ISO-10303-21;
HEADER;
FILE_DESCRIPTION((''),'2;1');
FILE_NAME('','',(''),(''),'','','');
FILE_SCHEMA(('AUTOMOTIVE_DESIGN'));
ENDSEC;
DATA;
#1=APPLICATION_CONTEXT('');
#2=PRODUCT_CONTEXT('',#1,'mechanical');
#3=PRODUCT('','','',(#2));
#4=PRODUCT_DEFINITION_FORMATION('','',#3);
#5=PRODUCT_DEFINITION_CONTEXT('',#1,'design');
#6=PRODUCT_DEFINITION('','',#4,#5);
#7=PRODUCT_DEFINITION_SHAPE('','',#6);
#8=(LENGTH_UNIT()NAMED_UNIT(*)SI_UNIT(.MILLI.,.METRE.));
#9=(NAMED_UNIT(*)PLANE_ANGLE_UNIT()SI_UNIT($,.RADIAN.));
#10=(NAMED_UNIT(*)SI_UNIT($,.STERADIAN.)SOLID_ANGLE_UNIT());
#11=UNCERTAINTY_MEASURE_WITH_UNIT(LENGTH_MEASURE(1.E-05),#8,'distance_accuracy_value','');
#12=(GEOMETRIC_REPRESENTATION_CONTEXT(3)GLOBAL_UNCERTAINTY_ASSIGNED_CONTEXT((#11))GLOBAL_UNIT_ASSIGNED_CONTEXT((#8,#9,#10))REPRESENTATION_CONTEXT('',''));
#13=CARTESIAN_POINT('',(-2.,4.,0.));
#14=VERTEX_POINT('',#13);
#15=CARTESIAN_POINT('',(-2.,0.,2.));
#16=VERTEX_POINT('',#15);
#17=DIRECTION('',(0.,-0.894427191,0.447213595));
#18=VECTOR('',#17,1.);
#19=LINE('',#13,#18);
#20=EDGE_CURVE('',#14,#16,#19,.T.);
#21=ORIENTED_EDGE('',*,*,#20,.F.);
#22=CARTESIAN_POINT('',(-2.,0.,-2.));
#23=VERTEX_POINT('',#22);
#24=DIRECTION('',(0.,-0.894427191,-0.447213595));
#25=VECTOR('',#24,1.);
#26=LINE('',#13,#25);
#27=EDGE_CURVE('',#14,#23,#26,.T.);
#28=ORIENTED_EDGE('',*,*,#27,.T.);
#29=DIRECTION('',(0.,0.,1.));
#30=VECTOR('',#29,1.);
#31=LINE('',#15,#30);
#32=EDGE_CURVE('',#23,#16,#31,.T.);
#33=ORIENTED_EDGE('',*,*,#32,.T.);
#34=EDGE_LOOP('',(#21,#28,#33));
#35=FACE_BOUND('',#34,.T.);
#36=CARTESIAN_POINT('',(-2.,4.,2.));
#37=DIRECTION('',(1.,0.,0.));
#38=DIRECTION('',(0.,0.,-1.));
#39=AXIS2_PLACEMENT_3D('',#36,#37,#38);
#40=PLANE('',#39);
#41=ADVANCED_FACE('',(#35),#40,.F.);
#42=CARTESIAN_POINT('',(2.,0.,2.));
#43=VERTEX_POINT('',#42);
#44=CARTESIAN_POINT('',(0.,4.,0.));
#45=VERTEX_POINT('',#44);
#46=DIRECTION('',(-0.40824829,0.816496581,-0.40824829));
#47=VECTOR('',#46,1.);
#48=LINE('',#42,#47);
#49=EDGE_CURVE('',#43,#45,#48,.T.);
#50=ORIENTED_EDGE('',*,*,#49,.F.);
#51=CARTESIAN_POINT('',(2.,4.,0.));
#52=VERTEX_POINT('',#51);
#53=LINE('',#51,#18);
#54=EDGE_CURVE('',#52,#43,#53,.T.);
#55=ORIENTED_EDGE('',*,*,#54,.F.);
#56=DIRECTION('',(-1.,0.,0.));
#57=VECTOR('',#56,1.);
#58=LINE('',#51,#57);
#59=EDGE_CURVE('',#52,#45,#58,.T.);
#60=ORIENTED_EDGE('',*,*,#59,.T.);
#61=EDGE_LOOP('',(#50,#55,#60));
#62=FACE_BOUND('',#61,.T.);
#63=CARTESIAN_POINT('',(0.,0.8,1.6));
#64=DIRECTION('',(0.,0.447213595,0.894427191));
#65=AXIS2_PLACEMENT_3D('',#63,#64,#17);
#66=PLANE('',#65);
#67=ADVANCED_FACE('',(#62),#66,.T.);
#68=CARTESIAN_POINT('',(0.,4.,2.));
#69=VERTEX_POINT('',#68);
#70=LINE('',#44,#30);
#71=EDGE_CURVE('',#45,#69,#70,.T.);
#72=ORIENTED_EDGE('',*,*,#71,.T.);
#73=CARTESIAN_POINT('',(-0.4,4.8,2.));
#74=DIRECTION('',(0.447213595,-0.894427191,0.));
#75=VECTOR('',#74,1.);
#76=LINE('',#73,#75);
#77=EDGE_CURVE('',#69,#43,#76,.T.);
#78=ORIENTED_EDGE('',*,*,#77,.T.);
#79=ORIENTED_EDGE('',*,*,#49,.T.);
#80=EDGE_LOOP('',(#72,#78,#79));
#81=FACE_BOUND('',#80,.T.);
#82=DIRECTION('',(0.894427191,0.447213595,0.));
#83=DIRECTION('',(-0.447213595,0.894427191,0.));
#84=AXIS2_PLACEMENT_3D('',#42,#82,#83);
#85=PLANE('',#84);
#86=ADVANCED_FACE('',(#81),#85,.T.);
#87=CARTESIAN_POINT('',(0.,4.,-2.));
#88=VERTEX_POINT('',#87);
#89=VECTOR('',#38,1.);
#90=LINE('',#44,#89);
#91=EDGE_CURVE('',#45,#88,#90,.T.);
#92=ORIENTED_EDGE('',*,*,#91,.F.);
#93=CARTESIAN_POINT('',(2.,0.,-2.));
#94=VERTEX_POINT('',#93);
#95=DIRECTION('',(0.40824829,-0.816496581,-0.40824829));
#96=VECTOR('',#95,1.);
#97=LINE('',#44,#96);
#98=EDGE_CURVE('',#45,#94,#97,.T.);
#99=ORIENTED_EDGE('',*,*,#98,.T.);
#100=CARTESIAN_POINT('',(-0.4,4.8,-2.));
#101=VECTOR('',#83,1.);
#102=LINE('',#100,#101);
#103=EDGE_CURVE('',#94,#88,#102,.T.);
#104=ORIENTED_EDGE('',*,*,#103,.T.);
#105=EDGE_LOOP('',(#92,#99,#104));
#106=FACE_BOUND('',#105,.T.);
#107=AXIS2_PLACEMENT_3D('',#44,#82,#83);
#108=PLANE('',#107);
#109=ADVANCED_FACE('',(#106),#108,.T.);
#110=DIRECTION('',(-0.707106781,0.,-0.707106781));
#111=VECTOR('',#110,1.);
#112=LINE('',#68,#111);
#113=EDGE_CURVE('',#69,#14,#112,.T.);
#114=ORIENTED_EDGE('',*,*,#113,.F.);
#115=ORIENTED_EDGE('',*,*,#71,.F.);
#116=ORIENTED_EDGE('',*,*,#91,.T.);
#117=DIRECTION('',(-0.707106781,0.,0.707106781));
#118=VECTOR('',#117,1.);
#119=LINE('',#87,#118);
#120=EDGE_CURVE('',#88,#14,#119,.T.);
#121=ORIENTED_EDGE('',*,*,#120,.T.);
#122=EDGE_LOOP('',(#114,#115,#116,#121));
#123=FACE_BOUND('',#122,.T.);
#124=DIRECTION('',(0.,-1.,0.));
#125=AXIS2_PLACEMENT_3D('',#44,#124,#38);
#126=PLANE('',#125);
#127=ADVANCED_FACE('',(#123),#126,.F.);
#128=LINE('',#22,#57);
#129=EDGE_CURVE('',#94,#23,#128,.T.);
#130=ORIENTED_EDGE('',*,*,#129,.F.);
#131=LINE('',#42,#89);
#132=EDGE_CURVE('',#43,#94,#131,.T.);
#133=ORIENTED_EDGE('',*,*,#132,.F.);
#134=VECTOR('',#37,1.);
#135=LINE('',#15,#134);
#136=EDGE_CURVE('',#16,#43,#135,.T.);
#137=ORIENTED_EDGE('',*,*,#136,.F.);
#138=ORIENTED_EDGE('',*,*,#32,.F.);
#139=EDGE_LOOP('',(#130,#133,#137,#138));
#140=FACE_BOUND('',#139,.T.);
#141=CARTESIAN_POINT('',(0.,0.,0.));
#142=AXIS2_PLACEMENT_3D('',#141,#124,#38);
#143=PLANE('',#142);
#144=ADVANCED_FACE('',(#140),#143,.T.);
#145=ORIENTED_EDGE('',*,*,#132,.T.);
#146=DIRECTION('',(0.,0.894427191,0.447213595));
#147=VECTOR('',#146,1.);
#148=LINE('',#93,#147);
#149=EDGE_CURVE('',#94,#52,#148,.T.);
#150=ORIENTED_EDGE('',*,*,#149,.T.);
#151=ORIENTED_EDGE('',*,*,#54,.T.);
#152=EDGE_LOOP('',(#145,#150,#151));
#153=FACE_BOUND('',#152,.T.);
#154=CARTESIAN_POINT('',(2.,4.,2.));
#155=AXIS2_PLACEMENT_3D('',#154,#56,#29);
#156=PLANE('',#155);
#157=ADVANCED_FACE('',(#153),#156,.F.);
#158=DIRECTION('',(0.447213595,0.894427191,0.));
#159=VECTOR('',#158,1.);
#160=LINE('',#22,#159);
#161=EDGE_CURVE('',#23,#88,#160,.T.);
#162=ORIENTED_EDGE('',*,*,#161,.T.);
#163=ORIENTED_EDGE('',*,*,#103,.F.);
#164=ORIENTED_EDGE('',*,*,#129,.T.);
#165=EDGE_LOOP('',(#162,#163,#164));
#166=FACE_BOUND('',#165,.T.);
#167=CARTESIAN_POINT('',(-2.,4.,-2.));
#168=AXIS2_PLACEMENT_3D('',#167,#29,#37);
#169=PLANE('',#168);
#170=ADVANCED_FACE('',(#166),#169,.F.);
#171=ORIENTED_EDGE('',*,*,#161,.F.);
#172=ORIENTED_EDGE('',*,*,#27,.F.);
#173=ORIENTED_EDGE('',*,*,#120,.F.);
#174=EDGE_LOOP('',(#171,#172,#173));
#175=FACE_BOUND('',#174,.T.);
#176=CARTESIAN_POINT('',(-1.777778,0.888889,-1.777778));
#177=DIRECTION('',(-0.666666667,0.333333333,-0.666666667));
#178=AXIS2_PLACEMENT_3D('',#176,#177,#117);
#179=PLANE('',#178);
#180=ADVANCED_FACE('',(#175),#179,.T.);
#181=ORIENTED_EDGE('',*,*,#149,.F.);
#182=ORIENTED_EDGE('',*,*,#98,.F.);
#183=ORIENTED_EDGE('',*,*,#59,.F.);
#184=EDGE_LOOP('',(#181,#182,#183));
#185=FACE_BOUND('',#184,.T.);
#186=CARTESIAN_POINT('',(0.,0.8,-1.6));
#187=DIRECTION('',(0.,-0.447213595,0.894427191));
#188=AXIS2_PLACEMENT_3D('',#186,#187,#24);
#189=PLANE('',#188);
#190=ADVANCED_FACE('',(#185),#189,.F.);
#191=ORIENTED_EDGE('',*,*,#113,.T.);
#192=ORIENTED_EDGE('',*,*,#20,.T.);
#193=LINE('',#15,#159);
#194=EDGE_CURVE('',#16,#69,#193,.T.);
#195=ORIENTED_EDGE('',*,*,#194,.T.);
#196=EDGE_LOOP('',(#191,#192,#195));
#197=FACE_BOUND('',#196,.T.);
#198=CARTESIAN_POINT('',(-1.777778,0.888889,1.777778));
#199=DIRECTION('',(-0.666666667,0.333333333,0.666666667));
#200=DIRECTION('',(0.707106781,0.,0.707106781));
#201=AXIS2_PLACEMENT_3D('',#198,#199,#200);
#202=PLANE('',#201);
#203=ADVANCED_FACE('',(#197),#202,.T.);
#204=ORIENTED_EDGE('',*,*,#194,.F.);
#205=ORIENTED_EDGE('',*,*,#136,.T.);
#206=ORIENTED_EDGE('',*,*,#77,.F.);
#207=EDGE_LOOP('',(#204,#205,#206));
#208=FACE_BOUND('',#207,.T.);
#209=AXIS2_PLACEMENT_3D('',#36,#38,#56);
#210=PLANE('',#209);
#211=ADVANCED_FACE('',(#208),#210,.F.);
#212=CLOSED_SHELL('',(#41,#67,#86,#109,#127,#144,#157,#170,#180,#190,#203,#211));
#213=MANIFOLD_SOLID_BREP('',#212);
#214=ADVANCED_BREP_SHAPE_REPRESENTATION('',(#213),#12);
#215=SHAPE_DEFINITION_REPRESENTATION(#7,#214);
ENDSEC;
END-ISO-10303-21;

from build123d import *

# Parameters (mm, degrees)
SKETCH2_W           = 4
SKETCH2_H           = 4
BOSS_EXTRUDE1_DEPTH = 4
CUT_EXTRUDE4_START  = -0.894427191
CUT_EXTRUDE4_DEPTH  = 4.472135955
CUT_EXTRUDE9_DEPTH  = 10
CUT_EXTRUDE10_DEPTH = 10


# Read off the part's stored shape, not the designer's step: Cut-Extrude4
with BuildPart() as part:
    # Sketch2 → Boss-Extrude1 (new body)
    with BuildSketch(Plane(origin=(0, 0, 0), x_dir=(1, 0, 0), z_dir=(0, 1, 0))):
        Rectangle(SKETCH2_W, SKETCH2_H)
    extrude(amount=BOSS_EXTRUDE1_DEPTH)

    # Cut-Extrude4 outline → Cut-Extrude4 (cut)
    with BuildSketch(Plane(origin=(0, 0, 0), x_dir=(0.8944271909999155, -0.4472135954999585, 0), z_dir=(0.4472135954999585, 0.8944271909999156, 0)).offset(CUT_EXTRUDE4_START)):
        Polygon((-1.788854382, -2), (-3.577708764, 0), (-1.788854382, 2), (-5, 2), (-5, -2), align=None)
    extrude(amount=CUT_EXTRUDE4_DEPTH, mode=Mode.SUBTRACT)

    # 3DSketch4 → Cut-Extrude9 (cut, along a direction that is not the sketch's normal)
    with BuildSketch(Plane(origin=(2, 0, 2), x_dir=(-0.4082482904638631, 0.8164965809277261, -0.4082482904638631), z_dir=(0, -0.447213595499958, -0.894427190999916))):
        Polygon((0, 0), (4.898979486, 0), (4.082482905, 1.825741858), align=None)
    extrude(amount=-CUT_EXTRUDE9_DEPTH, dir=(0, 0, -1), mode=Mode.SUBTRACT)

    # 3DSketch5 → Cut-Extrude10 (cut, along a direction that is not the sketch's normal)
    with BuildSketch(Plane(origin=(0, 4, 0), x_dir=(0.4082482904638631, -0.8164965809277261, -0.4082482904638631), z_dir=(0, -0.447213595499958, 0.8944271909999159))):
        Polygon((0, 0), (4.898979486, 0), (0.816496581, 1.825741858), align=None)
    extrude(amount=-CUT_EXTRUDE10_DEPTH, dir=(0, 0, 1), mode=Mode.SUBTRACT)


solid = part.part
